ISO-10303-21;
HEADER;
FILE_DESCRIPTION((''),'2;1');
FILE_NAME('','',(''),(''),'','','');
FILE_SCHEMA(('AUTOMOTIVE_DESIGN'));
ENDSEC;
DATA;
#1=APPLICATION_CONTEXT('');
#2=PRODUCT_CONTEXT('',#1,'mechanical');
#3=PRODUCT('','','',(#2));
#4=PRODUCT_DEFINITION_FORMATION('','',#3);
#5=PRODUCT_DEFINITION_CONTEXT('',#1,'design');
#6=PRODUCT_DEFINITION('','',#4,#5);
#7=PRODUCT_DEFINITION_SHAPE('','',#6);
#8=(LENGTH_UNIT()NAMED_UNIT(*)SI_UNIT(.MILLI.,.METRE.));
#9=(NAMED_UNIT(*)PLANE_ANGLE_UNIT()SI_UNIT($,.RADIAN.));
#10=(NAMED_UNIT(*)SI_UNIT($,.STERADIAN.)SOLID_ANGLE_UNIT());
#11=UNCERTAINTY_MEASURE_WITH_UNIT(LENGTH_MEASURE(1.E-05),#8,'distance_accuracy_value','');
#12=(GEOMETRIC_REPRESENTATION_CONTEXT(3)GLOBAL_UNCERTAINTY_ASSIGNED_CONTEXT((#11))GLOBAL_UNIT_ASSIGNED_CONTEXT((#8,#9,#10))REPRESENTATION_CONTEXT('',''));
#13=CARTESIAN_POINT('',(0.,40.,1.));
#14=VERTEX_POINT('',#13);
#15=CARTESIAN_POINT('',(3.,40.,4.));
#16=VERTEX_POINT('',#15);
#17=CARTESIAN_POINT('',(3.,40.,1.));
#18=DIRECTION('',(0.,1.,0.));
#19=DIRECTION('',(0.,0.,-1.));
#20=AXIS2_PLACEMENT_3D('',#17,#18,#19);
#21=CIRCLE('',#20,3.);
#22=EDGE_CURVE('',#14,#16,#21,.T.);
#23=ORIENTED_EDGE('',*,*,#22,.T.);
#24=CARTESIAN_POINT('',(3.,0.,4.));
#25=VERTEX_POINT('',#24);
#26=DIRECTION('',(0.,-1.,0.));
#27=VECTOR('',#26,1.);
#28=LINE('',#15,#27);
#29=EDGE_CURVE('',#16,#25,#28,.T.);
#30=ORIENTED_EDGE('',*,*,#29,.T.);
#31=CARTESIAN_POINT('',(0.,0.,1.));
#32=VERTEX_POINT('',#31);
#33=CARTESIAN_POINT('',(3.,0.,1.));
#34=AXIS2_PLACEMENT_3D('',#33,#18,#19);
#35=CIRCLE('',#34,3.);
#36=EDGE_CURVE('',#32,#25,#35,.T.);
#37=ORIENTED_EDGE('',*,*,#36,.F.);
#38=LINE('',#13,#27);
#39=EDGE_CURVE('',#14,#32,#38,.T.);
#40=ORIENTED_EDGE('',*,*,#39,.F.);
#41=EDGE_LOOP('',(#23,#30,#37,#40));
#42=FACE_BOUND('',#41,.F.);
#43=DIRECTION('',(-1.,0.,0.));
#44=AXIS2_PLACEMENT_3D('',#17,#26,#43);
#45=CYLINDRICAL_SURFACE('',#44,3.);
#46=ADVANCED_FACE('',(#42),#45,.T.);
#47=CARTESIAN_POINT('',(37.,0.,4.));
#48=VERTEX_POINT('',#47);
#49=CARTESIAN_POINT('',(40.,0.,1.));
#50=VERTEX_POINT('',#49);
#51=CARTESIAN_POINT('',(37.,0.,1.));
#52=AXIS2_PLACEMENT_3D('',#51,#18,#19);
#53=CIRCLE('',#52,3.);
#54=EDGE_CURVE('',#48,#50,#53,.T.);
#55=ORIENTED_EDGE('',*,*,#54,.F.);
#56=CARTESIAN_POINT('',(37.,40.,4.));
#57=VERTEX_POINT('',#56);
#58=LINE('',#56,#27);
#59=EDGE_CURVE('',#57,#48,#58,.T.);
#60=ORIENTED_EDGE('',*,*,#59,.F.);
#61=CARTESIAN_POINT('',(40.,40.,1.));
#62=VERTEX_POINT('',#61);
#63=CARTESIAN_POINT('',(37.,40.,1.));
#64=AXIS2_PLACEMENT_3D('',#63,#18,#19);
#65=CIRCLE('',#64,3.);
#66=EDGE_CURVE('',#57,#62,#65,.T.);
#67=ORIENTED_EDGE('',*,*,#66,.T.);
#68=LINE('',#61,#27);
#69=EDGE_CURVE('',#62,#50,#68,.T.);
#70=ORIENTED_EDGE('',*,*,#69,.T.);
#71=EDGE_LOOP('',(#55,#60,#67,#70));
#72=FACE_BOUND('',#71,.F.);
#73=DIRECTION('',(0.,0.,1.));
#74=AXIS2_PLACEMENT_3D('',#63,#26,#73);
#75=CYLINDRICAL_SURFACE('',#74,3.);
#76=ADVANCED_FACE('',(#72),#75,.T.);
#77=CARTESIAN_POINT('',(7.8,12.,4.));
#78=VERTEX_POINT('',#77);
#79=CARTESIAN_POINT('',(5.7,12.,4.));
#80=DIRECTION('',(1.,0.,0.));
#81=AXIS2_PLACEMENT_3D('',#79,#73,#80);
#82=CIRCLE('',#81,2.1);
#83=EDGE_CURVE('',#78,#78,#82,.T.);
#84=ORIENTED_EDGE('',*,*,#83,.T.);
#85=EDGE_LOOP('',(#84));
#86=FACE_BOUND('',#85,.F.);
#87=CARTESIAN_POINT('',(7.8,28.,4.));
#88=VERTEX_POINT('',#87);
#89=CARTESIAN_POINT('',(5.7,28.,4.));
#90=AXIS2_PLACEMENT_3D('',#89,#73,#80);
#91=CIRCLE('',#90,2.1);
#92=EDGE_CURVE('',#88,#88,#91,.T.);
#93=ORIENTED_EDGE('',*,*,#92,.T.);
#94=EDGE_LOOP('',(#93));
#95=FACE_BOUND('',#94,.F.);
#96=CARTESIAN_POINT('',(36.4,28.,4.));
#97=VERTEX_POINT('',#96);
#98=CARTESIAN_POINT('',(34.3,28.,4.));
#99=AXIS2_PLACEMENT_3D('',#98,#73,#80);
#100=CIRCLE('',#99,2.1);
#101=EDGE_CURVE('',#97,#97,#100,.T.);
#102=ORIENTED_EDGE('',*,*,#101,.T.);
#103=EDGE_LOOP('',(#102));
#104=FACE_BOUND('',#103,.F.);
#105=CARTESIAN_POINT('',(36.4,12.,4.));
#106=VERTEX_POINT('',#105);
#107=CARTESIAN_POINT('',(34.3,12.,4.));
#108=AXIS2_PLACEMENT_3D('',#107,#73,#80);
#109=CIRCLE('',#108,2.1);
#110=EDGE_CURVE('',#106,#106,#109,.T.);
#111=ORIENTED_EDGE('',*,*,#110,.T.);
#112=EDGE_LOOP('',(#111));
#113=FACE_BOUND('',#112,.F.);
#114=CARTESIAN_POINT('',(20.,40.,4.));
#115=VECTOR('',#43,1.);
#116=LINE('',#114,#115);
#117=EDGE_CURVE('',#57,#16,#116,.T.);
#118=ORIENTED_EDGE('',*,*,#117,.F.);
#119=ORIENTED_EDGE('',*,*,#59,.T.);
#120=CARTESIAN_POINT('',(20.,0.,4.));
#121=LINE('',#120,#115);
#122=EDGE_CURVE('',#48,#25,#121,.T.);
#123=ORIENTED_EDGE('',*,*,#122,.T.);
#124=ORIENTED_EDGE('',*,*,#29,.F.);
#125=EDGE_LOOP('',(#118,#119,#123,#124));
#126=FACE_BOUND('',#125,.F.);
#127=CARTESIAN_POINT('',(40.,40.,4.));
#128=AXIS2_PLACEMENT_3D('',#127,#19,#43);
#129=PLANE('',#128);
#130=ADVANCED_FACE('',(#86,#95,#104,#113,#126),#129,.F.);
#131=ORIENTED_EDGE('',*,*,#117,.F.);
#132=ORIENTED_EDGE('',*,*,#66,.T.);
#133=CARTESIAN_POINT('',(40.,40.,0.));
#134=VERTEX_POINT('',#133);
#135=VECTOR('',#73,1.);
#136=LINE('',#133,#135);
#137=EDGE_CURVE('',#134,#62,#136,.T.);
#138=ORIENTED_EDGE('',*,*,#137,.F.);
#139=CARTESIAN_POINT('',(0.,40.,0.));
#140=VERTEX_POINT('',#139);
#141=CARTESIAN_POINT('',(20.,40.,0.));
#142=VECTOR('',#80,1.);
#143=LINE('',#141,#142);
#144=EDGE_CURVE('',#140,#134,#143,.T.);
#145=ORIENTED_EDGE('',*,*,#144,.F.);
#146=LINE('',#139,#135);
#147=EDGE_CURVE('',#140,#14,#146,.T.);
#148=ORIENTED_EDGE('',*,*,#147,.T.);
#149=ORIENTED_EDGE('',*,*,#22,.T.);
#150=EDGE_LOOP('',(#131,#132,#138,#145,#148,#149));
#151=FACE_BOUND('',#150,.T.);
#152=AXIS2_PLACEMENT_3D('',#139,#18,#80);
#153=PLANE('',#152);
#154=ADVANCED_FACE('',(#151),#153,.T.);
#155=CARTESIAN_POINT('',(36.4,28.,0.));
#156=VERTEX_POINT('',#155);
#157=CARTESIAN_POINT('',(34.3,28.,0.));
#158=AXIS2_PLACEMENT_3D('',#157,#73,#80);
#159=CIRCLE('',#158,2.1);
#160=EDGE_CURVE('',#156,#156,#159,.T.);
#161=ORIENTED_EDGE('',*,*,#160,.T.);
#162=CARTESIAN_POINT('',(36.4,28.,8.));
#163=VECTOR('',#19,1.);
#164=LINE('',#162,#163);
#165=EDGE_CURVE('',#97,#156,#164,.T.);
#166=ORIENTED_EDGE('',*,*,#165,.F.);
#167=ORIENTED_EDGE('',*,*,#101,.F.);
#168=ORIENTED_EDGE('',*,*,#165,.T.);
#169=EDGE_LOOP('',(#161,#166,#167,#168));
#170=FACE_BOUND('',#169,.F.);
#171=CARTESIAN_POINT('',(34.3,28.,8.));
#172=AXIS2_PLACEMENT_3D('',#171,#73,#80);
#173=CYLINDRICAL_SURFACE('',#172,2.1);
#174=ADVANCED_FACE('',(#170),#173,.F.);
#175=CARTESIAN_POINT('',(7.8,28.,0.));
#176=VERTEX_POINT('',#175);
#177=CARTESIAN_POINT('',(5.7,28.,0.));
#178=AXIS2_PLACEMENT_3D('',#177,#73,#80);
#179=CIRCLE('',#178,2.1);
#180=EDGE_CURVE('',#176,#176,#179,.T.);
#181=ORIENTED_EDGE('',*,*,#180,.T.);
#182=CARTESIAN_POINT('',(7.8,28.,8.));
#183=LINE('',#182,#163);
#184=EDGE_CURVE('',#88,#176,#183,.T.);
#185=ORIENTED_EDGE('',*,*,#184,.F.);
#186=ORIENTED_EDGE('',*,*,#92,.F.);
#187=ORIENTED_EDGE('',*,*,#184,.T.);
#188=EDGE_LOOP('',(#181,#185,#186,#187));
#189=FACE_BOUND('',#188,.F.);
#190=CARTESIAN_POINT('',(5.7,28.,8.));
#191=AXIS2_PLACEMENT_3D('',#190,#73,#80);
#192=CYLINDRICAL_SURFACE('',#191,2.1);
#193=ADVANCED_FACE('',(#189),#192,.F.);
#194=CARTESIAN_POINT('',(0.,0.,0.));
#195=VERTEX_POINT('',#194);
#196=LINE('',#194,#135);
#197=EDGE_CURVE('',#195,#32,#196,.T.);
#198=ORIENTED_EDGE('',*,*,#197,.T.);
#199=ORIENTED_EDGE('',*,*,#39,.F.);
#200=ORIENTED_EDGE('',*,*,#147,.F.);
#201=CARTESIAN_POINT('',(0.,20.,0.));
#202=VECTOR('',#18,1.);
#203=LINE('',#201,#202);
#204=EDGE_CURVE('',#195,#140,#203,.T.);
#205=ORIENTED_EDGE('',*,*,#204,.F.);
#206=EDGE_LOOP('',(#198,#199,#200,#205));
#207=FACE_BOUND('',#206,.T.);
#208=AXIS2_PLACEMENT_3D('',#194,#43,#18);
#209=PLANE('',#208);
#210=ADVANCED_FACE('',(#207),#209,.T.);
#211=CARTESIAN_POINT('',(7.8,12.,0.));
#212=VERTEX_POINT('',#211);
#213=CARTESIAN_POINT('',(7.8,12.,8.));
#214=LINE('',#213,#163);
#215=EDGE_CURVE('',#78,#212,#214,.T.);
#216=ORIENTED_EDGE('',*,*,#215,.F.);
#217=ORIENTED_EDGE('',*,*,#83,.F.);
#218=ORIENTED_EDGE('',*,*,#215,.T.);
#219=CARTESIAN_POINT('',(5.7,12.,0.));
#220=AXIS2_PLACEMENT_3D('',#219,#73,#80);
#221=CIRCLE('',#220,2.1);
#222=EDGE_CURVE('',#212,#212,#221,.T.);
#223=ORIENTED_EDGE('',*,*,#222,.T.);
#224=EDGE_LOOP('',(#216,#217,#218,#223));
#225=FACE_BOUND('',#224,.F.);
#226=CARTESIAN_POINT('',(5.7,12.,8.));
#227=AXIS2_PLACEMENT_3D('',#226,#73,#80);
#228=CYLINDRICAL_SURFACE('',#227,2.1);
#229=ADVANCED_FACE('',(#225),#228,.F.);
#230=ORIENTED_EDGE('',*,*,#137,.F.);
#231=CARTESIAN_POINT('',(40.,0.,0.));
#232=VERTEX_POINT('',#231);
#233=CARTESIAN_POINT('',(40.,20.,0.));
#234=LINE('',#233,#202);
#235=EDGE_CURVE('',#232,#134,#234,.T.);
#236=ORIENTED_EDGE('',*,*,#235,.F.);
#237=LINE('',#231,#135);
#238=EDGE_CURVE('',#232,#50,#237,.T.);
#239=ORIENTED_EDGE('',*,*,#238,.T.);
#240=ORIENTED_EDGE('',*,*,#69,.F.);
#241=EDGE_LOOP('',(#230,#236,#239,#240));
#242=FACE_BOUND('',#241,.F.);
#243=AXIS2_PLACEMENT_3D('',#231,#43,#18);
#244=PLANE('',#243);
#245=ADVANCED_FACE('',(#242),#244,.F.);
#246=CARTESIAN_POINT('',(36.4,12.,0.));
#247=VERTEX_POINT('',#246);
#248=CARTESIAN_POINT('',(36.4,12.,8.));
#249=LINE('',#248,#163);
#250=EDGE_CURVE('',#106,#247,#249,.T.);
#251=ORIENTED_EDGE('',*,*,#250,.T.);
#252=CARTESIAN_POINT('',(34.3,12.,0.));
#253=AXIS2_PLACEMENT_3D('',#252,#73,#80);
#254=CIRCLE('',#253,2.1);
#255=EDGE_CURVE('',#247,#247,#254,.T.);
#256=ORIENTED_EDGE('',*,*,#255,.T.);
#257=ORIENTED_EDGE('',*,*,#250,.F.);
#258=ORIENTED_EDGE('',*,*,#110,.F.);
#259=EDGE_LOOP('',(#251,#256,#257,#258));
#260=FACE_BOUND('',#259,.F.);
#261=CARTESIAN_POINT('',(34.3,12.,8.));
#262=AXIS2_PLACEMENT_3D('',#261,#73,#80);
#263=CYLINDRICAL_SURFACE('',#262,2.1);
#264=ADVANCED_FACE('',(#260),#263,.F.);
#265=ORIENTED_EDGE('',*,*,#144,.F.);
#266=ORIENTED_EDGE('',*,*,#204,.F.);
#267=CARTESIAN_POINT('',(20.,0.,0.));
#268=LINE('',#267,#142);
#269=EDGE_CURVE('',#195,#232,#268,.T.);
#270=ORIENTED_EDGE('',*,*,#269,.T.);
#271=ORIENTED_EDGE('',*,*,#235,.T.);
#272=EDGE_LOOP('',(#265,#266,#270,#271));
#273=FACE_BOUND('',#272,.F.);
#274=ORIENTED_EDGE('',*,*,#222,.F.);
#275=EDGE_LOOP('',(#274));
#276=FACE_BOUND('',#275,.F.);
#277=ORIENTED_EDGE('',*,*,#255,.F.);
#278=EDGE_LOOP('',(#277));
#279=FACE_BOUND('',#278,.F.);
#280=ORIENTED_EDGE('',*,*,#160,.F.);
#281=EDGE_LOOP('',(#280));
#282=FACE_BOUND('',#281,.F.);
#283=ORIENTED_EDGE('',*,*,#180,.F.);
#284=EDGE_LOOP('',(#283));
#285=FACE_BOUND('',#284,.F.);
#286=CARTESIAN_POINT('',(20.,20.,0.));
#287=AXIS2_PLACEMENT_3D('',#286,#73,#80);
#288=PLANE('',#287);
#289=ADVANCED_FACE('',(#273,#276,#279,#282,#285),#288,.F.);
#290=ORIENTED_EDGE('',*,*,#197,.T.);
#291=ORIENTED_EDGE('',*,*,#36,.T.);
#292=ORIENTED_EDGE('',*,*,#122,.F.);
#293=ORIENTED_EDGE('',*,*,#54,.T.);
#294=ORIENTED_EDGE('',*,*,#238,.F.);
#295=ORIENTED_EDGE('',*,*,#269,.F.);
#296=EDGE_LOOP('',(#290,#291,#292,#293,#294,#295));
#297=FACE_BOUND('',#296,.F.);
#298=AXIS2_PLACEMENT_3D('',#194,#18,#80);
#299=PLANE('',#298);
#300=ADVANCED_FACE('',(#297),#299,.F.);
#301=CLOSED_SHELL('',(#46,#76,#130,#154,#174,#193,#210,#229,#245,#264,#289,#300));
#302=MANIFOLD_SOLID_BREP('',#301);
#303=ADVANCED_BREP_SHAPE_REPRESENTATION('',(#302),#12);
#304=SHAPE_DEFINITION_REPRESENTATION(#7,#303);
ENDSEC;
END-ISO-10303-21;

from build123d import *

# Parameters (mm, degrees)
F0_W     = 40
F0_H     = 40
F1_DEPTH = 8
F2_R     = 2.1
F3_DEPTH = 25
F4_W     = 40
F4_H     = 4
F5_DEPTH = 100
F6_R     = 3


# Not quite as in the source:
# - a feature names something its author has since deleted; it is built from what else it names


with BuildPart() as f1:
    # F0 (on Top) → F1 (new body)
    with BuildSketch(Plane.XY):
        with Locations((20, 20)):
            Rectangle(F0_W, F0_H)
    extrude(amount=F1_DEPTH)

    # F2 (on face) → F3 (cut)
    with BuildSketch(Plane.XY.offset(8)):
        with Locations((5.7, 12)):
            Circle(F2_R)
        with Locations((5.7, 28)):
            Circle(F2_R)
        with Locations((34.3, 28)):
            Circle(F2_R)
        with Locations((34.3, 12)):
            Circle(F2_R)
    extrude(amount=-F3_DEPTH, mode=Mode.SUBTRACT)

    # F4 (on face) → F5 (cut)
    with BuildSketch(Plane(origin=(0, 40, 0), x_dir=(-1, 0, 0), z_dir=(0, 1, 0))):
        with Locations((-20, 6)):
            Rectangle(F4_W, F4_H)
    extrude(amount=-F5_DEPTH, mode=Mode.SUBTRACT)

    # F6
    f6_edges = [f1.edges().sort_by_distance(p)[0] for p in [
        (0, 20, 4),
        (40, 20, 4),
    ]]
    fillet(f6_edges, radius=F6_R)


solid = f1.part
